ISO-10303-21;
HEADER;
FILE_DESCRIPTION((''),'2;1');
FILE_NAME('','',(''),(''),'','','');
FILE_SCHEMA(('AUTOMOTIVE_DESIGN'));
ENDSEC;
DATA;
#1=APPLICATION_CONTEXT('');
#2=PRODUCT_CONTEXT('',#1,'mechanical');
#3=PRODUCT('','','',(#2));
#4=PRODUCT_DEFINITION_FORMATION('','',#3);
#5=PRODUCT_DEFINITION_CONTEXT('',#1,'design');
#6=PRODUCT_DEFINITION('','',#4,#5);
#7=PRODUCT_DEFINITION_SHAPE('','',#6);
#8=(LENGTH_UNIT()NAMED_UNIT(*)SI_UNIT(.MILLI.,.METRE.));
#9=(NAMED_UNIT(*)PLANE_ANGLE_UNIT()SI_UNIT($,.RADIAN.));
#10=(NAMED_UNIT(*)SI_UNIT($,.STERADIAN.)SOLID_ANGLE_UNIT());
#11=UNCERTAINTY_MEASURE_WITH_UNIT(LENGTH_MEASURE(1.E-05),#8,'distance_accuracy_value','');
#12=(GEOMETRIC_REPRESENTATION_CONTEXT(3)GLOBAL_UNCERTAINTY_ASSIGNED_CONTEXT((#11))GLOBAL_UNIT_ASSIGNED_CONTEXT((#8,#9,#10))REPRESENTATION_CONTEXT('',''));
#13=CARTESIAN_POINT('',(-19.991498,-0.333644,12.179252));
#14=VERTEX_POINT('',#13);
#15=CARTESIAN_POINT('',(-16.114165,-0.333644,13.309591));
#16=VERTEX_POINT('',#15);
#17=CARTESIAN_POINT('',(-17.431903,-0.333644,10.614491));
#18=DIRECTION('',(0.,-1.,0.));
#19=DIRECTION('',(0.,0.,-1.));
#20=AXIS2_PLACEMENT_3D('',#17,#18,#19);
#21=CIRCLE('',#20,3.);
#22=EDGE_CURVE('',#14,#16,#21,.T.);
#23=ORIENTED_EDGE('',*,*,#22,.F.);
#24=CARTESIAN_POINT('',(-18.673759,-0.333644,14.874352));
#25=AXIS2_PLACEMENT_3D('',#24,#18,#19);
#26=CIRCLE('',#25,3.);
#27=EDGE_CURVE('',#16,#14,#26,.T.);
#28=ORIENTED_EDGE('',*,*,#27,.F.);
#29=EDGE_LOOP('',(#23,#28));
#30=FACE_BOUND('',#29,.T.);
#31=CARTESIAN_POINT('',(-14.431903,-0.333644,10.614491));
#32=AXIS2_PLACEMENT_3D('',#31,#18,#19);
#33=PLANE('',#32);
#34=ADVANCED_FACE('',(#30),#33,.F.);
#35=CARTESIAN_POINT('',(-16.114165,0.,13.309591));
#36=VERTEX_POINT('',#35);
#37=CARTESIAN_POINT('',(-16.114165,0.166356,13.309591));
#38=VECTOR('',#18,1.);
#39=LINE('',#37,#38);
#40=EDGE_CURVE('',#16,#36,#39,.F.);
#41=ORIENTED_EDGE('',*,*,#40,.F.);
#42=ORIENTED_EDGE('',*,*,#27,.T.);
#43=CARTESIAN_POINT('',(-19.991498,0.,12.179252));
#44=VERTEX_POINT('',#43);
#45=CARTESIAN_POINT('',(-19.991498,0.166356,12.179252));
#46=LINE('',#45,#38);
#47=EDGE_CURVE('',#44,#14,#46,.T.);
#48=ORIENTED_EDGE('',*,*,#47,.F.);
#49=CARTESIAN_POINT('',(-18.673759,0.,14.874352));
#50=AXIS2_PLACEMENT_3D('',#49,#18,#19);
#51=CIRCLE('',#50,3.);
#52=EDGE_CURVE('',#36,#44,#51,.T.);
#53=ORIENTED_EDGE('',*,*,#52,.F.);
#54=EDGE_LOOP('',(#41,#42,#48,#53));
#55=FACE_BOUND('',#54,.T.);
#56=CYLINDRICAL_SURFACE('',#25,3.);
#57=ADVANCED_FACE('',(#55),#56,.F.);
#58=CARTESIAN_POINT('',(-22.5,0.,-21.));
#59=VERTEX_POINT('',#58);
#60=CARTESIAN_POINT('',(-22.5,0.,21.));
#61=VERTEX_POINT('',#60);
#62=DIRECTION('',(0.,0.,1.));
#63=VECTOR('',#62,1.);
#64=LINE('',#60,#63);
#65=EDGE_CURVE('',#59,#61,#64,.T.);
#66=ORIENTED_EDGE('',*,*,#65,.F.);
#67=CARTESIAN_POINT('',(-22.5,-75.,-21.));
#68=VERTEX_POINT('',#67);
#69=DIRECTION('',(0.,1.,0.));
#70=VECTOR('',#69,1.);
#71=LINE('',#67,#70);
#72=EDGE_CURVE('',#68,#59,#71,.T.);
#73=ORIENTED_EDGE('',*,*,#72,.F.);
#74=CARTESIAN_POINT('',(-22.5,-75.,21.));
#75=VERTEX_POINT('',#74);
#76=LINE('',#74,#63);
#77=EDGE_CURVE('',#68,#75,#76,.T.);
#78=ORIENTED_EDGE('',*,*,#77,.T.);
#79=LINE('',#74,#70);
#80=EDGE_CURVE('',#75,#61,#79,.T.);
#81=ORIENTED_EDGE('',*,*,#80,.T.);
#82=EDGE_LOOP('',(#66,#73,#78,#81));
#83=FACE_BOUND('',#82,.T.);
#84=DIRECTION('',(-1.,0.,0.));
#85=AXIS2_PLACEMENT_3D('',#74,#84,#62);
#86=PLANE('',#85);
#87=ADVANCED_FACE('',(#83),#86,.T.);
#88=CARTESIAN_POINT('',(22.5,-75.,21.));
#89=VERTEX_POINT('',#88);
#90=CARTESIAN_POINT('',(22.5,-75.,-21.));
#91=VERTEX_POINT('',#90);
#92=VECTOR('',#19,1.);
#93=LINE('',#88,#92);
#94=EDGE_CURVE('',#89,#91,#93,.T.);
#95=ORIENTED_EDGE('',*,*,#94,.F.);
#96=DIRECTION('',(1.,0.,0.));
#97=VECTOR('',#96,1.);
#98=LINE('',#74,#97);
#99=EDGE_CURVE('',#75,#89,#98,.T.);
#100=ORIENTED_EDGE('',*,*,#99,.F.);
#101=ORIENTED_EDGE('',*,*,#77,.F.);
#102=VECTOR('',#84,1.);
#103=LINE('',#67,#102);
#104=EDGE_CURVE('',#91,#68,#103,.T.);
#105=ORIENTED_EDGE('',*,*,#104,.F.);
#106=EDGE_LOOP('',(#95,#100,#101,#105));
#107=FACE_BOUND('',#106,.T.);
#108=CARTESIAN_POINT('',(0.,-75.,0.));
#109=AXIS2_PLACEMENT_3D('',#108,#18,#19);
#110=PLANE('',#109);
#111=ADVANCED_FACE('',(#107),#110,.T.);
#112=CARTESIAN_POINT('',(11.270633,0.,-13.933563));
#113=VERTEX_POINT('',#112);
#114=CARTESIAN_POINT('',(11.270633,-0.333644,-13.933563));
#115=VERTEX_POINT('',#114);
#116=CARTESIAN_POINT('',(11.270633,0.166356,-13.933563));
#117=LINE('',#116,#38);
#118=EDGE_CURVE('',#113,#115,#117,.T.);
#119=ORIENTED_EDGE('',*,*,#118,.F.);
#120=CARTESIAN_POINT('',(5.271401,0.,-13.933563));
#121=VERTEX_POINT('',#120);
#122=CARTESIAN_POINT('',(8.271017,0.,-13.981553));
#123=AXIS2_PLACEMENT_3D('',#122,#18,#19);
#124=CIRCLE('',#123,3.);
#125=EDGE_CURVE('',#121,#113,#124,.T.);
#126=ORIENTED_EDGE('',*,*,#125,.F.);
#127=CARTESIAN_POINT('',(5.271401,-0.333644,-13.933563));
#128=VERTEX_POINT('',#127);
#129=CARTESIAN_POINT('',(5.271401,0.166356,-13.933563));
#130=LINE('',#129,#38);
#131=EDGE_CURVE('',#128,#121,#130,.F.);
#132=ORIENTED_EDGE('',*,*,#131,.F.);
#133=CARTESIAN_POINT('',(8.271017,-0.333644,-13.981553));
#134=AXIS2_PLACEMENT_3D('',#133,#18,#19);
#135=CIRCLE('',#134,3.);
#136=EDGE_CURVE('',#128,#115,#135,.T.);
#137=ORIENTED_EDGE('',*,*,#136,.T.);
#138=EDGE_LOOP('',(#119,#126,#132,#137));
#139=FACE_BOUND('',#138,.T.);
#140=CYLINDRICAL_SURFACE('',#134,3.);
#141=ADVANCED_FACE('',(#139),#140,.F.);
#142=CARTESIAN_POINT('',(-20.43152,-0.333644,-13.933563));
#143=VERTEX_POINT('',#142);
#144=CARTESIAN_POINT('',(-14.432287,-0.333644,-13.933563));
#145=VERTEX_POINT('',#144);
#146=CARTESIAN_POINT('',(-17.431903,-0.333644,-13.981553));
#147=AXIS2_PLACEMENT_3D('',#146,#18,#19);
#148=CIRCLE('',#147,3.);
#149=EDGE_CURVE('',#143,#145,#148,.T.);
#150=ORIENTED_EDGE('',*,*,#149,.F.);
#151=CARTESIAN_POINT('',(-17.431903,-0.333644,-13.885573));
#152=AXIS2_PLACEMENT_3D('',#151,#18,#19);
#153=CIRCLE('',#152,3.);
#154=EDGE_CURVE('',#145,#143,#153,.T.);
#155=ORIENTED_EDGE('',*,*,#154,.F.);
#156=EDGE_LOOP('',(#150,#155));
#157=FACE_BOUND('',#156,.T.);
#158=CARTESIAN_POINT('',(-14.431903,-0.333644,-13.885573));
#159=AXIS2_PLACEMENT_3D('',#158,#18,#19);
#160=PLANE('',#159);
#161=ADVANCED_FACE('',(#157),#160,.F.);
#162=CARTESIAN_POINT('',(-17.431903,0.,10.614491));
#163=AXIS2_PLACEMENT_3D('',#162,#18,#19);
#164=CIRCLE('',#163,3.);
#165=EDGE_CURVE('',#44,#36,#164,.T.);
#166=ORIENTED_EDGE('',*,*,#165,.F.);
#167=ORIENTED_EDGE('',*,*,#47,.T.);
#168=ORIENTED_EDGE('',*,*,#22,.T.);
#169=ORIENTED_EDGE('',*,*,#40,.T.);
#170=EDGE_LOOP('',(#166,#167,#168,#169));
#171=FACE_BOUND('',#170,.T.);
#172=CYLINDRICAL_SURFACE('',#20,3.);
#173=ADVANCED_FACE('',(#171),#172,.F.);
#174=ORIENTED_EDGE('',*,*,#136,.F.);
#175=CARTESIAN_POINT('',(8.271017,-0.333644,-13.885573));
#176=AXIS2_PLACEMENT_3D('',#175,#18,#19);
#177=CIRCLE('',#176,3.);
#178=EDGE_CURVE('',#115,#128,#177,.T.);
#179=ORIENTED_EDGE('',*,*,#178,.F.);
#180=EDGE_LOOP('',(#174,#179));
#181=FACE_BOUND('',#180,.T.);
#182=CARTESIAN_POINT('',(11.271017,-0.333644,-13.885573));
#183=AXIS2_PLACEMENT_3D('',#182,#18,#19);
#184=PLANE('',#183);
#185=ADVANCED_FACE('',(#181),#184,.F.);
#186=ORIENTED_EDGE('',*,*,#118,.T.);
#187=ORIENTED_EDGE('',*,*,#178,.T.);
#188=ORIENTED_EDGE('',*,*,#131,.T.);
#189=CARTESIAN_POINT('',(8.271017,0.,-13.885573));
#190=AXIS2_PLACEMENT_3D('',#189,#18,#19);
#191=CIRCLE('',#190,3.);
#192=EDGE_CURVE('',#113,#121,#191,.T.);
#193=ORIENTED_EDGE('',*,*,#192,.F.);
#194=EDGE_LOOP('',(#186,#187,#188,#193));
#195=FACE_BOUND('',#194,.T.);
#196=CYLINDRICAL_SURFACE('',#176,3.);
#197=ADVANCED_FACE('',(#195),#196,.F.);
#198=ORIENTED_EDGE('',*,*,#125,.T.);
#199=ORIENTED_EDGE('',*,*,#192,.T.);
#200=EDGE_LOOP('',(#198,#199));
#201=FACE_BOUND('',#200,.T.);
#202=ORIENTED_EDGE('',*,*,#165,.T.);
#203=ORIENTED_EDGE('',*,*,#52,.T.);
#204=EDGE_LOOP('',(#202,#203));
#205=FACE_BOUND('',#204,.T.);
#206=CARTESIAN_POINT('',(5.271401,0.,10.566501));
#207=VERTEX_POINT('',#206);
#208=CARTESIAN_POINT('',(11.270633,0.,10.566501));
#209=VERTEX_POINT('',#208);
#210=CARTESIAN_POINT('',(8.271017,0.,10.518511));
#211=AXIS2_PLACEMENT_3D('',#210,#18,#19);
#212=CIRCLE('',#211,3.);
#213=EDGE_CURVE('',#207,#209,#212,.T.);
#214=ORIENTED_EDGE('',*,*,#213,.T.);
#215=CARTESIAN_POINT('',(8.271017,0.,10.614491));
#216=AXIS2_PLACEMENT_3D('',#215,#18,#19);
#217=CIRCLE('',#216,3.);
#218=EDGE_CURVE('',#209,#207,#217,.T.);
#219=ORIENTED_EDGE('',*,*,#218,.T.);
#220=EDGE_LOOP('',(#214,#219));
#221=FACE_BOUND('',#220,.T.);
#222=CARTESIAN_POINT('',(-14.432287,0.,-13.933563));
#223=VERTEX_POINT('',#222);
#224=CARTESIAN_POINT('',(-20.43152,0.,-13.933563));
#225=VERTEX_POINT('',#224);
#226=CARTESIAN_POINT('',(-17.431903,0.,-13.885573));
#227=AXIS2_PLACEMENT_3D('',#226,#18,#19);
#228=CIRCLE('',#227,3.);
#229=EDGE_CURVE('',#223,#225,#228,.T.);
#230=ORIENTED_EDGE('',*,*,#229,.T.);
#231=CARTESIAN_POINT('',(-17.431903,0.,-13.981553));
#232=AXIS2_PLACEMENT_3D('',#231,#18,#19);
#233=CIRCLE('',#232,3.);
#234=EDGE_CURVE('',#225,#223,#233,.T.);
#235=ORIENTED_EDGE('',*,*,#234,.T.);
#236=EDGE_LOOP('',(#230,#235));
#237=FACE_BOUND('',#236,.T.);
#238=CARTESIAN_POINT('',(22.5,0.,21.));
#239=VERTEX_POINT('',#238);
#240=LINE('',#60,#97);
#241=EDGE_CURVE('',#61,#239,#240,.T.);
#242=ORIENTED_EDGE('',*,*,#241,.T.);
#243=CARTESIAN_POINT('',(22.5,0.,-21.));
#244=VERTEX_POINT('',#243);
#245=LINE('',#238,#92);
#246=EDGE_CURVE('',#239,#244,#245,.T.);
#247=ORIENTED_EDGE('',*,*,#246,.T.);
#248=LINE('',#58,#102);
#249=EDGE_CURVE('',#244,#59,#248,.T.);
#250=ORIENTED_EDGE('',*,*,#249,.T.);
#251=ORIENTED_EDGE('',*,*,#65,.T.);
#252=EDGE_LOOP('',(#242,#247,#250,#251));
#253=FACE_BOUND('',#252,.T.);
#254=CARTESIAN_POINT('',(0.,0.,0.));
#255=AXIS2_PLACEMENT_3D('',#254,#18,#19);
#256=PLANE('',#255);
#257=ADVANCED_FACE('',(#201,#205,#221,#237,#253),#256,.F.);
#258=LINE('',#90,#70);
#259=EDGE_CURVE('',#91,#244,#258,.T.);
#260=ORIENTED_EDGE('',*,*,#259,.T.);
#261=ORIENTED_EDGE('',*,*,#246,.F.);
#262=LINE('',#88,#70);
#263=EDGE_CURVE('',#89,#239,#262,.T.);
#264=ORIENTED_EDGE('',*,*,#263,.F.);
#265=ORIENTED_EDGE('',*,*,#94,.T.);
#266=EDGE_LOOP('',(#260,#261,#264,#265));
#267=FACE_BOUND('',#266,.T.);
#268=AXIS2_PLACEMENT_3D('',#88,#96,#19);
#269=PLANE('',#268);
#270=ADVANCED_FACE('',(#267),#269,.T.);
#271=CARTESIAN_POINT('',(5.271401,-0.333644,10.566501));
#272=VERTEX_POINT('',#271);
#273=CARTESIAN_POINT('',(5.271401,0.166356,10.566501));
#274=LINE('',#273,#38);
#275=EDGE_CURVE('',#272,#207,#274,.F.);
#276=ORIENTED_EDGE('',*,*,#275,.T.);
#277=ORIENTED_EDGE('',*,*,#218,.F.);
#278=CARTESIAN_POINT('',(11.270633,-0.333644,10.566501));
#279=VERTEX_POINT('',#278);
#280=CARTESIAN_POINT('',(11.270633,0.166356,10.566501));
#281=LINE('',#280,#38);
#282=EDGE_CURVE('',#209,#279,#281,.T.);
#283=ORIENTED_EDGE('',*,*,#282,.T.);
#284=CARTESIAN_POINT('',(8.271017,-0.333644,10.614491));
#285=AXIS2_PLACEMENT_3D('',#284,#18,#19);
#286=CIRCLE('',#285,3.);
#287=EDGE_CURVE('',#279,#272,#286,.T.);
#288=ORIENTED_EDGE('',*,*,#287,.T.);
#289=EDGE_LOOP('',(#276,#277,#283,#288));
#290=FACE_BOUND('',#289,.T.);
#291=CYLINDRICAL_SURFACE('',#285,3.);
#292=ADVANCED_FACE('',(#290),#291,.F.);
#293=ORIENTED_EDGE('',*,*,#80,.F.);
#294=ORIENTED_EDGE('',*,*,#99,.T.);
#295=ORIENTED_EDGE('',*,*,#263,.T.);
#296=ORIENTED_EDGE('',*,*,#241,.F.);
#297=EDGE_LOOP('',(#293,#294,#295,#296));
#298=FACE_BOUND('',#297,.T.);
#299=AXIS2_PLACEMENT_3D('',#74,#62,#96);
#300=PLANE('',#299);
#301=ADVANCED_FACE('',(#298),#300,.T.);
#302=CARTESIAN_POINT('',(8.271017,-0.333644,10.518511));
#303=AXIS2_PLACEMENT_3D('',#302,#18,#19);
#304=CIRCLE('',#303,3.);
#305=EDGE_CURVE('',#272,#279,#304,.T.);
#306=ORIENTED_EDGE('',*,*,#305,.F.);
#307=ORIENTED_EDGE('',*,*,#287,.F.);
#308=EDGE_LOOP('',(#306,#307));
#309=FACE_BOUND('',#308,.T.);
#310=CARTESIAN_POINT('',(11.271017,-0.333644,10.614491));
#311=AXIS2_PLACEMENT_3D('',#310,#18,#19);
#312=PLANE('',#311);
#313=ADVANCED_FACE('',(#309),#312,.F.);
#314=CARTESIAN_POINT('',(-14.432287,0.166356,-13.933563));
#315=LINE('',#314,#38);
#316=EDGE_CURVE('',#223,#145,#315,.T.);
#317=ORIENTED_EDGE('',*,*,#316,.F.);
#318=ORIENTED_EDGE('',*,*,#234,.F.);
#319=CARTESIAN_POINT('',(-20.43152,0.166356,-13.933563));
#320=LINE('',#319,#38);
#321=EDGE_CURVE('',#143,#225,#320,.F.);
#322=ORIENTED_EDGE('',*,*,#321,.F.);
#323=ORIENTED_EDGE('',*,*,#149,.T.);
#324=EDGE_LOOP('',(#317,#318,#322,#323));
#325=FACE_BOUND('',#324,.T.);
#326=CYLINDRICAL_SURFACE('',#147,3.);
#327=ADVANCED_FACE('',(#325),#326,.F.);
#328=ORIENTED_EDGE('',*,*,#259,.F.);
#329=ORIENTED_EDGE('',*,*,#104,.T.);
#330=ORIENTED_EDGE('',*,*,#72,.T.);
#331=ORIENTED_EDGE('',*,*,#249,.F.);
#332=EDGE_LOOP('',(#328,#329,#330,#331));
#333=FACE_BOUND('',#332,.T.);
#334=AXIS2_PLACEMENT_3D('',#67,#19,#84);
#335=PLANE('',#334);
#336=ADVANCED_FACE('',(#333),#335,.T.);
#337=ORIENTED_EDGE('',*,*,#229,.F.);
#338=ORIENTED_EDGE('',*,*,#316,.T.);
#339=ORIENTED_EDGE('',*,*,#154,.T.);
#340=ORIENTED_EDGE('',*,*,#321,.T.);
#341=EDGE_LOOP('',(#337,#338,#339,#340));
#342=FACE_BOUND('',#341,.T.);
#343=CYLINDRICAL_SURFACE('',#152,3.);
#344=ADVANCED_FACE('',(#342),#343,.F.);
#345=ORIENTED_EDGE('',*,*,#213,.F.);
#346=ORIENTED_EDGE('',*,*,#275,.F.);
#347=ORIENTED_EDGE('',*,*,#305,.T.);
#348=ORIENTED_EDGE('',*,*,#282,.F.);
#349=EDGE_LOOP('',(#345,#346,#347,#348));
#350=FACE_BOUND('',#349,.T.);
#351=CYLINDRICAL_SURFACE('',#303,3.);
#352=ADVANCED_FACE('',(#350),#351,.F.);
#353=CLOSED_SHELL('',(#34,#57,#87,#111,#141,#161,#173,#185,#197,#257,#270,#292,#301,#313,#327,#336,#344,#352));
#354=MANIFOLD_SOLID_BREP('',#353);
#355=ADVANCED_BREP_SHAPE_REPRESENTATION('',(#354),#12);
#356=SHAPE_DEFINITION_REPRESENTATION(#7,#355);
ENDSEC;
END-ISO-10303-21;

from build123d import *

# Parameters (mm, degrees)
CROQUIS1_W                            = 45
CROQUIS1_H                            = 42
SALIENTE_EXTRUIR1_DEPTH               = 75
CROQUIS3_W                            = 3
CROQUIS3_H                            = 1
TALADRO_DE_MARGEN_PARA_M61_AT_2_COUNT = 2
TALADRO_DE_MARGEN_PARA_M61_AT_2_PITCH = 25.702920672
TALADRO_DE_MARGEN_PARA_M61_AT_3_COUNT = 2
TALADRO_DE_MARGEN_PARA_M61_AT_3_PITCH = 35.509059169
TALADRO_DE_MARGEN_PARA_M61_AT_4_COUNT = 2
TALADRO_DE_MARGEN_PARA_M61_AT_4_PITCH = 24.500064327
TALADRO_START                         = -0.333644058
TALADRO_DE_MARGEN_PARA_M62_DEPTH      = 0.333644058


# Read off the part's stored shape, not the designer's step: Taladro de margen para M62
with BuildPart() as part:
    # Croquis1 → Saliente-Extruir1 (new body)
    with BuildSketch(Plane(origin=(0, 0, 0), x_dir=(1, 0, 0), z_dir=(0, 1, 0))):
        Rectangle(CROQUIS1_W, CROQUIS1_H)
    extrude(amount=-SALIENTE_EXTRUIR1_DEPTH)

    # Croquis3 → Taladro de margen para M61 (revolve, cut)
    with BuildSketch(Plane(origin=(8.271017264, -0.333644058, -13.885573428), x_dir=(0, 0, -1), z_dir=(1, 0, 0))):
        with Locations((1.5, 0.5)):
            Rectangle(CROQUIS3_W, CROQUIS3_H)
    taladro_de_margen_para_m61 = revolve(axis=Axis((8.271017264, -6.683644058, -13.885573428), (0, 1, 0)), mode=Mode.SUBTRACT)

    # Taladro de margen para M61 at 2: Taladro de margen para M61 ×2
    with Locations(*[(-i * TALADRO_DE_MARGEN_PARA_M61_AT_2_PITCH, 0, 0) for i in range(1, TALADRO_DE_MARGEN_PARA_M61_AT_2_COUNT)]):
        add(taladro_de_margen_para_m61, mode=Mode.SUBTRACT)

    # Taladro de margen para M61 at 3: Taladro de margen para M61 ×2
    with Locations(*[Vector(-0.7238412189178528, 0, 0.6899665859992912) * (i * TALADRO_DE_MARGEN_PARA_M61_AT_3_PITCH) for i in range(1, TALADRO_DE_MARGEN_PARA_M61_AT_3_COUNT)]):
        add(taladro_de_margen_para_m61, mode=Mode.SUBTRACT)

    # Taladro de margen para M61 at 4: Taladro de margen para M61 ×2
    with Locations(*[(0, 0, i * TALADRO_DE_MARGEN_PARA_M61_AT_4_PITCH) for i in range(1, TALADRO_DE_MARGEN_PARA_M61_AT_4_COUNT)]):
        add(taladro_de_margen_para_m61, mode=Mode.SUBTRACT)

    # Taladro de margen para M62 outline → Taladro de margen para M62 (cut)
    with BuildSketch(Plane(origin=(0, 0, 0), x_dir=(1, 0, 0), z_dir=(0, 1, 0)).offset(TALADRO_START)):
        with BuildLine():
            ThreePointArc((11.270633402, -10.566501054), (8.271017264, -7.518511209), (5.271401126, -10.566501054))
            ThreePointArc((5.271401126, -10.566501054), (8.271017264, -7.614490899), (11.270633402, -10.566501054))
        make_face()
        with BuildLine():
            ThreePointArc((-19.991497807, -12.179251747), (-19.51338327, -17.754461658), (-16.114164948, -13.309591147))
            ThreePointArc((-16.114164948, -13.309591147), (-18.271527332, -13.494600561), (-19.991497807, -12.179251747))
        make_face()
        with BuildLine():
            ThreePointArc((-14.43228727, 13.933563273), (-17.431903408, 16.981553118), (-20.431519546, 13.933563273))
            ThreePointArc((-20.431519546, 13.933563273), (-17.431903408, 16.885573428), (-14.43228727, 13.933563273))
        make_face()
        with BuildLine():
            ThreePointArc((11.270633402, 13.933563273), (8.271017264, 16.981553118), (5.271401126, 13.933563273))
            ThreePointArc((5.271401126, 13.933563273), (8.271017264, 16.885573428), (11.270633402, 13.933563273))
        make_face()
    extrude(amount=TALADRO_DE_MARGEN_PARA_M62_DEPTH, mode=Mode.SUBTRACT)


solid = part.part
